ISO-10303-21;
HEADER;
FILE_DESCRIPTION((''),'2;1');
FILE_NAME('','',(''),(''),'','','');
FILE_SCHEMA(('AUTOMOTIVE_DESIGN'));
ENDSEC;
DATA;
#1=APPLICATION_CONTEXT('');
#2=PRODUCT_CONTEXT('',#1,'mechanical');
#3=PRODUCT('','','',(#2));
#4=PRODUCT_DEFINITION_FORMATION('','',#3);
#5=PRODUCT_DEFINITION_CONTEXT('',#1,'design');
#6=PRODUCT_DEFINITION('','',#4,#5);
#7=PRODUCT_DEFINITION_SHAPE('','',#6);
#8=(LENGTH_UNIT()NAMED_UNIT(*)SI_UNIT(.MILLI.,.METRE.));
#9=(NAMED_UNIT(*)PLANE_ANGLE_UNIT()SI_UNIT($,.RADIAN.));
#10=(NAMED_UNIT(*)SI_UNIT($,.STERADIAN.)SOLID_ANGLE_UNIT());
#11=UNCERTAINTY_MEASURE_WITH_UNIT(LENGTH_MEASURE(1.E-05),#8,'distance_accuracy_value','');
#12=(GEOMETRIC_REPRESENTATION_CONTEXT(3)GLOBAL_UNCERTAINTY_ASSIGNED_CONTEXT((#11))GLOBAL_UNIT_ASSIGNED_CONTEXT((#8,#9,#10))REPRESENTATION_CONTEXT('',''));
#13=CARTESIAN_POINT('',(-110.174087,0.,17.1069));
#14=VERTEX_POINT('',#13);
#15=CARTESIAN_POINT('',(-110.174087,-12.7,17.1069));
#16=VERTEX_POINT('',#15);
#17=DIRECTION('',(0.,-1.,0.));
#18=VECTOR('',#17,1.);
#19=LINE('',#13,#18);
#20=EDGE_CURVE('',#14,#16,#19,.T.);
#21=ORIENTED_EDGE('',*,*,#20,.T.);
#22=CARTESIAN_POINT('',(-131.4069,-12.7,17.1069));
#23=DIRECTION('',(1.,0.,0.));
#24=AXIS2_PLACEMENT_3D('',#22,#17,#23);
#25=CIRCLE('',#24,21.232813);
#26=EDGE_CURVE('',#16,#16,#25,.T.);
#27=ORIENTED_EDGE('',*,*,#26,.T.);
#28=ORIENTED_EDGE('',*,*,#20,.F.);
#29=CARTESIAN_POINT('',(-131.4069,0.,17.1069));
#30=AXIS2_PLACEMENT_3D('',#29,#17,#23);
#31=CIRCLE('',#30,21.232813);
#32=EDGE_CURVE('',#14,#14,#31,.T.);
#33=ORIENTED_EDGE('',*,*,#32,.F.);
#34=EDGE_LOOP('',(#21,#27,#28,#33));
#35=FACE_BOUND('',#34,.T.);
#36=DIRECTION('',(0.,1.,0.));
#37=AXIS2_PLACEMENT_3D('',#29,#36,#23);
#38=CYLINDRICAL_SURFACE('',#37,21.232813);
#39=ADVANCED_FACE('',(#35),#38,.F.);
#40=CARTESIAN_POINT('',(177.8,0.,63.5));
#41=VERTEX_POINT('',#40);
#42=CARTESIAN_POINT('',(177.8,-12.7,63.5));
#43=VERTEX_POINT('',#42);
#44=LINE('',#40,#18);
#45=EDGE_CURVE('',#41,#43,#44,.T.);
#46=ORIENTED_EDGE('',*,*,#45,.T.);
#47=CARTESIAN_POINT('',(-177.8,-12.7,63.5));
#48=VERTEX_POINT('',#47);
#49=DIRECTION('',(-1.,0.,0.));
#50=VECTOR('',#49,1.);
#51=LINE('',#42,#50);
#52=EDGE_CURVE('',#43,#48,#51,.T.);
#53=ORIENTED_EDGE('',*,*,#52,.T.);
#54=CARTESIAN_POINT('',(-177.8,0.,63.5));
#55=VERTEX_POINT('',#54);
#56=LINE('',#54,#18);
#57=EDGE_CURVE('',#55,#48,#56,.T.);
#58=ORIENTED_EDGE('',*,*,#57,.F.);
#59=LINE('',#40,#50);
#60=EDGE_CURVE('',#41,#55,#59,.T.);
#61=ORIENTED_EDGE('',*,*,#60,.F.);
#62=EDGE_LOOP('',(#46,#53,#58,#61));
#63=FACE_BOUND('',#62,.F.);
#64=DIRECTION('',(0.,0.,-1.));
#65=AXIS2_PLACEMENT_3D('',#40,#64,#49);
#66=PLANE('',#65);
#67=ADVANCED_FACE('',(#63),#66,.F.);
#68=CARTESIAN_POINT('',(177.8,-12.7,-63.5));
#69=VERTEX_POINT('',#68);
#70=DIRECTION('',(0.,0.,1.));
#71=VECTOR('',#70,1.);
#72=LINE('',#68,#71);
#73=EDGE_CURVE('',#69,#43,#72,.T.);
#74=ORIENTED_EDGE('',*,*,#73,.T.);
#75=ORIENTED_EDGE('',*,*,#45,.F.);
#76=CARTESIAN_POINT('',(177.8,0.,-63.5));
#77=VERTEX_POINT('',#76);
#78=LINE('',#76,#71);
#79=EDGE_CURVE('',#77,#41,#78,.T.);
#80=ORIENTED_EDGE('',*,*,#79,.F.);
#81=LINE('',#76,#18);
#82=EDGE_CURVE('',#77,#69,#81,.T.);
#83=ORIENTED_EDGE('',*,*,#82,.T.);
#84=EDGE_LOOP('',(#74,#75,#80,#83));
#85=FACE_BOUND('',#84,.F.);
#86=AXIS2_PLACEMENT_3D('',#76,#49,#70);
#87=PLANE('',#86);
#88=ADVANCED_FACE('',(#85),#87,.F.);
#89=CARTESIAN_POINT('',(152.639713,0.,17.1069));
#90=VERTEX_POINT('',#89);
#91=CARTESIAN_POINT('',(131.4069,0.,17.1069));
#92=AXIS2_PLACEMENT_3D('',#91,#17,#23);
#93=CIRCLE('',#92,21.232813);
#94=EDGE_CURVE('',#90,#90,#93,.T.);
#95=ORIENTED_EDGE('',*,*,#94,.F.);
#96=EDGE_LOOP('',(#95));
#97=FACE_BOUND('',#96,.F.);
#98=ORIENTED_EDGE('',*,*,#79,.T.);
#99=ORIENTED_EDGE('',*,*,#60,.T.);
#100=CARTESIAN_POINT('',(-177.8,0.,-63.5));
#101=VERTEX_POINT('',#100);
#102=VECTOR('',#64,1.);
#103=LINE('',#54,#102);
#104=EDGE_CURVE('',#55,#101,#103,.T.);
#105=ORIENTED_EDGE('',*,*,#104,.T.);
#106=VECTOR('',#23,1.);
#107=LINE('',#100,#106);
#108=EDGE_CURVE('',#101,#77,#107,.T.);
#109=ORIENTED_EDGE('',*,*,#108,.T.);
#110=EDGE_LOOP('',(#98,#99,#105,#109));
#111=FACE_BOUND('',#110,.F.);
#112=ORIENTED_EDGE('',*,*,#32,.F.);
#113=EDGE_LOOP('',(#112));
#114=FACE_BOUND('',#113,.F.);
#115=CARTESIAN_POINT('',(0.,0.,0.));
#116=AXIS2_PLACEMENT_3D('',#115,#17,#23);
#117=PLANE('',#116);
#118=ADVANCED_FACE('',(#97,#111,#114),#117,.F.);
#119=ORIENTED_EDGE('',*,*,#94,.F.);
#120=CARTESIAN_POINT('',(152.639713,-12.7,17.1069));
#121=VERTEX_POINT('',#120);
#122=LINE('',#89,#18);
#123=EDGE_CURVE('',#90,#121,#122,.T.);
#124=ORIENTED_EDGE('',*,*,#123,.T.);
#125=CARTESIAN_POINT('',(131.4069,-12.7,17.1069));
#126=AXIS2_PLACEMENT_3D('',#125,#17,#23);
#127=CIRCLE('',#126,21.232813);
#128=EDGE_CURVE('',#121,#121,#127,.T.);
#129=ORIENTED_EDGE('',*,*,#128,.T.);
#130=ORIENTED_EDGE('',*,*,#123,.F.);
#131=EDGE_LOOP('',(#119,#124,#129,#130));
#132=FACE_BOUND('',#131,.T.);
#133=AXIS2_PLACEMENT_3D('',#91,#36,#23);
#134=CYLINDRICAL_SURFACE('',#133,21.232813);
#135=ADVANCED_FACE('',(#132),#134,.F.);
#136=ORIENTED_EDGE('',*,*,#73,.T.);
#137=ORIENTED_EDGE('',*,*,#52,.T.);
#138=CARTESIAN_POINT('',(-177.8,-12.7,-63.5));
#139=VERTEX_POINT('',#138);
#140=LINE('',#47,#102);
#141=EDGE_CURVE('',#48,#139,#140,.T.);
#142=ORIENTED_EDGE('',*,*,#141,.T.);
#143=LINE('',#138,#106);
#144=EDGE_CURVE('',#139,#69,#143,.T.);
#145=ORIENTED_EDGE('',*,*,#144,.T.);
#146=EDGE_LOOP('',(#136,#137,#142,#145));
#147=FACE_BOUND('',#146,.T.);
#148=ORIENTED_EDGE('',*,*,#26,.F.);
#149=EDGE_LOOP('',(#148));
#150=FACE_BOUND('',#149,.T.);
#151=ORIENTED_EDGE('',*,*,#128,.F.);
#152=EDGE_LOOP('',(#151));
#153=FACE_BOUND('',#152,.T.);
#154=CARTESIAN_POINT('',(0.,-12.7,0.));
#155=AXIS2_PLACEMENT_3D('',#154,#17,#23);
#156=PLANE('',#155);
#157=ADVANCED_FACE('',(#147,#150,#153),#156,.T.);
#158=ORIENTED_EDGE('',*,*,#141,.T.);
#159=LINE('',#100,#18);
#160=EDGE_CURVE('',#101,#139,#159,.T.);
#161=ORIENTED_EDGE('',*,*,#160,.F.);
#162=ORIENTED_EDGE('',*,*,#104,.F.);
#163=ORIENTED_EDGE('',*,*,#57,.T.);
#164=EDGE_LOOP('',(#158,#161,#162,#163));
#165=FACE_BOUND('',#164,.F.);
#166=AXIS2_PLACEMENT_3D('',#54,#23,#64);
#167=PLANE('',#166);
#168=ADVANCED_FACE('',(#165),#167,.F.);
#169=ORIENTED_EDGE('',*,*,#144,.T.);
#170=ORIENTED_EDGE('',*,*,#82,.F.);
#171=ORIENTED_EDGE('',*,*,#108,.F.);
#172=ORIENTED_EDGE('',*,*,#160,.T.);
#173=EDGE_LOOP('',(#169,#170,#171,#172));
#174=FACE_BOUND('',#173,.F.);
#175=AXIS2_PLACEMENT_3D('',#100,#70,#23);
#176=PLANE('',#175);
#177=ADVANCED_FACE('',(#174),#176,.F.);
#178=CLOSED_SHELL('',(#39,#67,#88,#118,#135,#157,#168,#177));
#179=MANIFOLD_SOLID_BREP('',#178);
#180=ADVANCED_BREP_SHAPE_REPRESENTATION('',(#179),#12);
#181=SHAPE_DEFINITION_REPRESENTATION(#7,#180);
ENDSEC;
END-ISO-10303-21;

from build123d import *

# Parameters (mm, degrees)
F0_R     = 21.2328125
F1_DEPTH = 12.7
F2_DEPTH = 385


# Not quite as in the source:
# - an extrude ends at something that could not be found from the text; its depth is read off the source's solid


with BuildPart() as f1:
    # F0 (on Front) → F1 (new body)
    with BuildSketch(Plane.XZ):
        Polygon((177.8, 17.1069), (177.8, 63.5), (131.4069, 63.5), (-131.4069, 63.5), (-177.8, 63.5), (-177.8, 17.1069), (-177.8, -63.5), (177.8, -63.5), align=None)
        with Locations((-131.4069, 17.1069)):
            Circle(F0_R, mode=Mode.SUBTRACT)
        with Locations((131.4069, 17.1069)):
            Circle(F0_R, mode=Mode.SUBTRACT)
    extrude(amount=F1_DEPTH)

    # F0 (on Front) → F2 (cut, through all)
    with BuildSketch(Plane.XZ):
        Polygon((177.8, 17.1069), (177.8, 63.5), (131.4069, 63.5), (-131.4069, 63.5), (-177.8, 63.5), (-177.8, 17.1069), (-177.8, -63.5), (177.8, -63.5), align=None)
        with Locations((-131.4069, 17.1069)):
            Circle(F0_R, mode=Mode.SUBTRACT)
        with Locations((131.4069, 17.1069)):
            Circle(F0_R, mode=Mode.SUBTRACT)
    extrude(amount=-F2_DEPTH, mode=Mode.SUBTRACT)


solid = f1.part
